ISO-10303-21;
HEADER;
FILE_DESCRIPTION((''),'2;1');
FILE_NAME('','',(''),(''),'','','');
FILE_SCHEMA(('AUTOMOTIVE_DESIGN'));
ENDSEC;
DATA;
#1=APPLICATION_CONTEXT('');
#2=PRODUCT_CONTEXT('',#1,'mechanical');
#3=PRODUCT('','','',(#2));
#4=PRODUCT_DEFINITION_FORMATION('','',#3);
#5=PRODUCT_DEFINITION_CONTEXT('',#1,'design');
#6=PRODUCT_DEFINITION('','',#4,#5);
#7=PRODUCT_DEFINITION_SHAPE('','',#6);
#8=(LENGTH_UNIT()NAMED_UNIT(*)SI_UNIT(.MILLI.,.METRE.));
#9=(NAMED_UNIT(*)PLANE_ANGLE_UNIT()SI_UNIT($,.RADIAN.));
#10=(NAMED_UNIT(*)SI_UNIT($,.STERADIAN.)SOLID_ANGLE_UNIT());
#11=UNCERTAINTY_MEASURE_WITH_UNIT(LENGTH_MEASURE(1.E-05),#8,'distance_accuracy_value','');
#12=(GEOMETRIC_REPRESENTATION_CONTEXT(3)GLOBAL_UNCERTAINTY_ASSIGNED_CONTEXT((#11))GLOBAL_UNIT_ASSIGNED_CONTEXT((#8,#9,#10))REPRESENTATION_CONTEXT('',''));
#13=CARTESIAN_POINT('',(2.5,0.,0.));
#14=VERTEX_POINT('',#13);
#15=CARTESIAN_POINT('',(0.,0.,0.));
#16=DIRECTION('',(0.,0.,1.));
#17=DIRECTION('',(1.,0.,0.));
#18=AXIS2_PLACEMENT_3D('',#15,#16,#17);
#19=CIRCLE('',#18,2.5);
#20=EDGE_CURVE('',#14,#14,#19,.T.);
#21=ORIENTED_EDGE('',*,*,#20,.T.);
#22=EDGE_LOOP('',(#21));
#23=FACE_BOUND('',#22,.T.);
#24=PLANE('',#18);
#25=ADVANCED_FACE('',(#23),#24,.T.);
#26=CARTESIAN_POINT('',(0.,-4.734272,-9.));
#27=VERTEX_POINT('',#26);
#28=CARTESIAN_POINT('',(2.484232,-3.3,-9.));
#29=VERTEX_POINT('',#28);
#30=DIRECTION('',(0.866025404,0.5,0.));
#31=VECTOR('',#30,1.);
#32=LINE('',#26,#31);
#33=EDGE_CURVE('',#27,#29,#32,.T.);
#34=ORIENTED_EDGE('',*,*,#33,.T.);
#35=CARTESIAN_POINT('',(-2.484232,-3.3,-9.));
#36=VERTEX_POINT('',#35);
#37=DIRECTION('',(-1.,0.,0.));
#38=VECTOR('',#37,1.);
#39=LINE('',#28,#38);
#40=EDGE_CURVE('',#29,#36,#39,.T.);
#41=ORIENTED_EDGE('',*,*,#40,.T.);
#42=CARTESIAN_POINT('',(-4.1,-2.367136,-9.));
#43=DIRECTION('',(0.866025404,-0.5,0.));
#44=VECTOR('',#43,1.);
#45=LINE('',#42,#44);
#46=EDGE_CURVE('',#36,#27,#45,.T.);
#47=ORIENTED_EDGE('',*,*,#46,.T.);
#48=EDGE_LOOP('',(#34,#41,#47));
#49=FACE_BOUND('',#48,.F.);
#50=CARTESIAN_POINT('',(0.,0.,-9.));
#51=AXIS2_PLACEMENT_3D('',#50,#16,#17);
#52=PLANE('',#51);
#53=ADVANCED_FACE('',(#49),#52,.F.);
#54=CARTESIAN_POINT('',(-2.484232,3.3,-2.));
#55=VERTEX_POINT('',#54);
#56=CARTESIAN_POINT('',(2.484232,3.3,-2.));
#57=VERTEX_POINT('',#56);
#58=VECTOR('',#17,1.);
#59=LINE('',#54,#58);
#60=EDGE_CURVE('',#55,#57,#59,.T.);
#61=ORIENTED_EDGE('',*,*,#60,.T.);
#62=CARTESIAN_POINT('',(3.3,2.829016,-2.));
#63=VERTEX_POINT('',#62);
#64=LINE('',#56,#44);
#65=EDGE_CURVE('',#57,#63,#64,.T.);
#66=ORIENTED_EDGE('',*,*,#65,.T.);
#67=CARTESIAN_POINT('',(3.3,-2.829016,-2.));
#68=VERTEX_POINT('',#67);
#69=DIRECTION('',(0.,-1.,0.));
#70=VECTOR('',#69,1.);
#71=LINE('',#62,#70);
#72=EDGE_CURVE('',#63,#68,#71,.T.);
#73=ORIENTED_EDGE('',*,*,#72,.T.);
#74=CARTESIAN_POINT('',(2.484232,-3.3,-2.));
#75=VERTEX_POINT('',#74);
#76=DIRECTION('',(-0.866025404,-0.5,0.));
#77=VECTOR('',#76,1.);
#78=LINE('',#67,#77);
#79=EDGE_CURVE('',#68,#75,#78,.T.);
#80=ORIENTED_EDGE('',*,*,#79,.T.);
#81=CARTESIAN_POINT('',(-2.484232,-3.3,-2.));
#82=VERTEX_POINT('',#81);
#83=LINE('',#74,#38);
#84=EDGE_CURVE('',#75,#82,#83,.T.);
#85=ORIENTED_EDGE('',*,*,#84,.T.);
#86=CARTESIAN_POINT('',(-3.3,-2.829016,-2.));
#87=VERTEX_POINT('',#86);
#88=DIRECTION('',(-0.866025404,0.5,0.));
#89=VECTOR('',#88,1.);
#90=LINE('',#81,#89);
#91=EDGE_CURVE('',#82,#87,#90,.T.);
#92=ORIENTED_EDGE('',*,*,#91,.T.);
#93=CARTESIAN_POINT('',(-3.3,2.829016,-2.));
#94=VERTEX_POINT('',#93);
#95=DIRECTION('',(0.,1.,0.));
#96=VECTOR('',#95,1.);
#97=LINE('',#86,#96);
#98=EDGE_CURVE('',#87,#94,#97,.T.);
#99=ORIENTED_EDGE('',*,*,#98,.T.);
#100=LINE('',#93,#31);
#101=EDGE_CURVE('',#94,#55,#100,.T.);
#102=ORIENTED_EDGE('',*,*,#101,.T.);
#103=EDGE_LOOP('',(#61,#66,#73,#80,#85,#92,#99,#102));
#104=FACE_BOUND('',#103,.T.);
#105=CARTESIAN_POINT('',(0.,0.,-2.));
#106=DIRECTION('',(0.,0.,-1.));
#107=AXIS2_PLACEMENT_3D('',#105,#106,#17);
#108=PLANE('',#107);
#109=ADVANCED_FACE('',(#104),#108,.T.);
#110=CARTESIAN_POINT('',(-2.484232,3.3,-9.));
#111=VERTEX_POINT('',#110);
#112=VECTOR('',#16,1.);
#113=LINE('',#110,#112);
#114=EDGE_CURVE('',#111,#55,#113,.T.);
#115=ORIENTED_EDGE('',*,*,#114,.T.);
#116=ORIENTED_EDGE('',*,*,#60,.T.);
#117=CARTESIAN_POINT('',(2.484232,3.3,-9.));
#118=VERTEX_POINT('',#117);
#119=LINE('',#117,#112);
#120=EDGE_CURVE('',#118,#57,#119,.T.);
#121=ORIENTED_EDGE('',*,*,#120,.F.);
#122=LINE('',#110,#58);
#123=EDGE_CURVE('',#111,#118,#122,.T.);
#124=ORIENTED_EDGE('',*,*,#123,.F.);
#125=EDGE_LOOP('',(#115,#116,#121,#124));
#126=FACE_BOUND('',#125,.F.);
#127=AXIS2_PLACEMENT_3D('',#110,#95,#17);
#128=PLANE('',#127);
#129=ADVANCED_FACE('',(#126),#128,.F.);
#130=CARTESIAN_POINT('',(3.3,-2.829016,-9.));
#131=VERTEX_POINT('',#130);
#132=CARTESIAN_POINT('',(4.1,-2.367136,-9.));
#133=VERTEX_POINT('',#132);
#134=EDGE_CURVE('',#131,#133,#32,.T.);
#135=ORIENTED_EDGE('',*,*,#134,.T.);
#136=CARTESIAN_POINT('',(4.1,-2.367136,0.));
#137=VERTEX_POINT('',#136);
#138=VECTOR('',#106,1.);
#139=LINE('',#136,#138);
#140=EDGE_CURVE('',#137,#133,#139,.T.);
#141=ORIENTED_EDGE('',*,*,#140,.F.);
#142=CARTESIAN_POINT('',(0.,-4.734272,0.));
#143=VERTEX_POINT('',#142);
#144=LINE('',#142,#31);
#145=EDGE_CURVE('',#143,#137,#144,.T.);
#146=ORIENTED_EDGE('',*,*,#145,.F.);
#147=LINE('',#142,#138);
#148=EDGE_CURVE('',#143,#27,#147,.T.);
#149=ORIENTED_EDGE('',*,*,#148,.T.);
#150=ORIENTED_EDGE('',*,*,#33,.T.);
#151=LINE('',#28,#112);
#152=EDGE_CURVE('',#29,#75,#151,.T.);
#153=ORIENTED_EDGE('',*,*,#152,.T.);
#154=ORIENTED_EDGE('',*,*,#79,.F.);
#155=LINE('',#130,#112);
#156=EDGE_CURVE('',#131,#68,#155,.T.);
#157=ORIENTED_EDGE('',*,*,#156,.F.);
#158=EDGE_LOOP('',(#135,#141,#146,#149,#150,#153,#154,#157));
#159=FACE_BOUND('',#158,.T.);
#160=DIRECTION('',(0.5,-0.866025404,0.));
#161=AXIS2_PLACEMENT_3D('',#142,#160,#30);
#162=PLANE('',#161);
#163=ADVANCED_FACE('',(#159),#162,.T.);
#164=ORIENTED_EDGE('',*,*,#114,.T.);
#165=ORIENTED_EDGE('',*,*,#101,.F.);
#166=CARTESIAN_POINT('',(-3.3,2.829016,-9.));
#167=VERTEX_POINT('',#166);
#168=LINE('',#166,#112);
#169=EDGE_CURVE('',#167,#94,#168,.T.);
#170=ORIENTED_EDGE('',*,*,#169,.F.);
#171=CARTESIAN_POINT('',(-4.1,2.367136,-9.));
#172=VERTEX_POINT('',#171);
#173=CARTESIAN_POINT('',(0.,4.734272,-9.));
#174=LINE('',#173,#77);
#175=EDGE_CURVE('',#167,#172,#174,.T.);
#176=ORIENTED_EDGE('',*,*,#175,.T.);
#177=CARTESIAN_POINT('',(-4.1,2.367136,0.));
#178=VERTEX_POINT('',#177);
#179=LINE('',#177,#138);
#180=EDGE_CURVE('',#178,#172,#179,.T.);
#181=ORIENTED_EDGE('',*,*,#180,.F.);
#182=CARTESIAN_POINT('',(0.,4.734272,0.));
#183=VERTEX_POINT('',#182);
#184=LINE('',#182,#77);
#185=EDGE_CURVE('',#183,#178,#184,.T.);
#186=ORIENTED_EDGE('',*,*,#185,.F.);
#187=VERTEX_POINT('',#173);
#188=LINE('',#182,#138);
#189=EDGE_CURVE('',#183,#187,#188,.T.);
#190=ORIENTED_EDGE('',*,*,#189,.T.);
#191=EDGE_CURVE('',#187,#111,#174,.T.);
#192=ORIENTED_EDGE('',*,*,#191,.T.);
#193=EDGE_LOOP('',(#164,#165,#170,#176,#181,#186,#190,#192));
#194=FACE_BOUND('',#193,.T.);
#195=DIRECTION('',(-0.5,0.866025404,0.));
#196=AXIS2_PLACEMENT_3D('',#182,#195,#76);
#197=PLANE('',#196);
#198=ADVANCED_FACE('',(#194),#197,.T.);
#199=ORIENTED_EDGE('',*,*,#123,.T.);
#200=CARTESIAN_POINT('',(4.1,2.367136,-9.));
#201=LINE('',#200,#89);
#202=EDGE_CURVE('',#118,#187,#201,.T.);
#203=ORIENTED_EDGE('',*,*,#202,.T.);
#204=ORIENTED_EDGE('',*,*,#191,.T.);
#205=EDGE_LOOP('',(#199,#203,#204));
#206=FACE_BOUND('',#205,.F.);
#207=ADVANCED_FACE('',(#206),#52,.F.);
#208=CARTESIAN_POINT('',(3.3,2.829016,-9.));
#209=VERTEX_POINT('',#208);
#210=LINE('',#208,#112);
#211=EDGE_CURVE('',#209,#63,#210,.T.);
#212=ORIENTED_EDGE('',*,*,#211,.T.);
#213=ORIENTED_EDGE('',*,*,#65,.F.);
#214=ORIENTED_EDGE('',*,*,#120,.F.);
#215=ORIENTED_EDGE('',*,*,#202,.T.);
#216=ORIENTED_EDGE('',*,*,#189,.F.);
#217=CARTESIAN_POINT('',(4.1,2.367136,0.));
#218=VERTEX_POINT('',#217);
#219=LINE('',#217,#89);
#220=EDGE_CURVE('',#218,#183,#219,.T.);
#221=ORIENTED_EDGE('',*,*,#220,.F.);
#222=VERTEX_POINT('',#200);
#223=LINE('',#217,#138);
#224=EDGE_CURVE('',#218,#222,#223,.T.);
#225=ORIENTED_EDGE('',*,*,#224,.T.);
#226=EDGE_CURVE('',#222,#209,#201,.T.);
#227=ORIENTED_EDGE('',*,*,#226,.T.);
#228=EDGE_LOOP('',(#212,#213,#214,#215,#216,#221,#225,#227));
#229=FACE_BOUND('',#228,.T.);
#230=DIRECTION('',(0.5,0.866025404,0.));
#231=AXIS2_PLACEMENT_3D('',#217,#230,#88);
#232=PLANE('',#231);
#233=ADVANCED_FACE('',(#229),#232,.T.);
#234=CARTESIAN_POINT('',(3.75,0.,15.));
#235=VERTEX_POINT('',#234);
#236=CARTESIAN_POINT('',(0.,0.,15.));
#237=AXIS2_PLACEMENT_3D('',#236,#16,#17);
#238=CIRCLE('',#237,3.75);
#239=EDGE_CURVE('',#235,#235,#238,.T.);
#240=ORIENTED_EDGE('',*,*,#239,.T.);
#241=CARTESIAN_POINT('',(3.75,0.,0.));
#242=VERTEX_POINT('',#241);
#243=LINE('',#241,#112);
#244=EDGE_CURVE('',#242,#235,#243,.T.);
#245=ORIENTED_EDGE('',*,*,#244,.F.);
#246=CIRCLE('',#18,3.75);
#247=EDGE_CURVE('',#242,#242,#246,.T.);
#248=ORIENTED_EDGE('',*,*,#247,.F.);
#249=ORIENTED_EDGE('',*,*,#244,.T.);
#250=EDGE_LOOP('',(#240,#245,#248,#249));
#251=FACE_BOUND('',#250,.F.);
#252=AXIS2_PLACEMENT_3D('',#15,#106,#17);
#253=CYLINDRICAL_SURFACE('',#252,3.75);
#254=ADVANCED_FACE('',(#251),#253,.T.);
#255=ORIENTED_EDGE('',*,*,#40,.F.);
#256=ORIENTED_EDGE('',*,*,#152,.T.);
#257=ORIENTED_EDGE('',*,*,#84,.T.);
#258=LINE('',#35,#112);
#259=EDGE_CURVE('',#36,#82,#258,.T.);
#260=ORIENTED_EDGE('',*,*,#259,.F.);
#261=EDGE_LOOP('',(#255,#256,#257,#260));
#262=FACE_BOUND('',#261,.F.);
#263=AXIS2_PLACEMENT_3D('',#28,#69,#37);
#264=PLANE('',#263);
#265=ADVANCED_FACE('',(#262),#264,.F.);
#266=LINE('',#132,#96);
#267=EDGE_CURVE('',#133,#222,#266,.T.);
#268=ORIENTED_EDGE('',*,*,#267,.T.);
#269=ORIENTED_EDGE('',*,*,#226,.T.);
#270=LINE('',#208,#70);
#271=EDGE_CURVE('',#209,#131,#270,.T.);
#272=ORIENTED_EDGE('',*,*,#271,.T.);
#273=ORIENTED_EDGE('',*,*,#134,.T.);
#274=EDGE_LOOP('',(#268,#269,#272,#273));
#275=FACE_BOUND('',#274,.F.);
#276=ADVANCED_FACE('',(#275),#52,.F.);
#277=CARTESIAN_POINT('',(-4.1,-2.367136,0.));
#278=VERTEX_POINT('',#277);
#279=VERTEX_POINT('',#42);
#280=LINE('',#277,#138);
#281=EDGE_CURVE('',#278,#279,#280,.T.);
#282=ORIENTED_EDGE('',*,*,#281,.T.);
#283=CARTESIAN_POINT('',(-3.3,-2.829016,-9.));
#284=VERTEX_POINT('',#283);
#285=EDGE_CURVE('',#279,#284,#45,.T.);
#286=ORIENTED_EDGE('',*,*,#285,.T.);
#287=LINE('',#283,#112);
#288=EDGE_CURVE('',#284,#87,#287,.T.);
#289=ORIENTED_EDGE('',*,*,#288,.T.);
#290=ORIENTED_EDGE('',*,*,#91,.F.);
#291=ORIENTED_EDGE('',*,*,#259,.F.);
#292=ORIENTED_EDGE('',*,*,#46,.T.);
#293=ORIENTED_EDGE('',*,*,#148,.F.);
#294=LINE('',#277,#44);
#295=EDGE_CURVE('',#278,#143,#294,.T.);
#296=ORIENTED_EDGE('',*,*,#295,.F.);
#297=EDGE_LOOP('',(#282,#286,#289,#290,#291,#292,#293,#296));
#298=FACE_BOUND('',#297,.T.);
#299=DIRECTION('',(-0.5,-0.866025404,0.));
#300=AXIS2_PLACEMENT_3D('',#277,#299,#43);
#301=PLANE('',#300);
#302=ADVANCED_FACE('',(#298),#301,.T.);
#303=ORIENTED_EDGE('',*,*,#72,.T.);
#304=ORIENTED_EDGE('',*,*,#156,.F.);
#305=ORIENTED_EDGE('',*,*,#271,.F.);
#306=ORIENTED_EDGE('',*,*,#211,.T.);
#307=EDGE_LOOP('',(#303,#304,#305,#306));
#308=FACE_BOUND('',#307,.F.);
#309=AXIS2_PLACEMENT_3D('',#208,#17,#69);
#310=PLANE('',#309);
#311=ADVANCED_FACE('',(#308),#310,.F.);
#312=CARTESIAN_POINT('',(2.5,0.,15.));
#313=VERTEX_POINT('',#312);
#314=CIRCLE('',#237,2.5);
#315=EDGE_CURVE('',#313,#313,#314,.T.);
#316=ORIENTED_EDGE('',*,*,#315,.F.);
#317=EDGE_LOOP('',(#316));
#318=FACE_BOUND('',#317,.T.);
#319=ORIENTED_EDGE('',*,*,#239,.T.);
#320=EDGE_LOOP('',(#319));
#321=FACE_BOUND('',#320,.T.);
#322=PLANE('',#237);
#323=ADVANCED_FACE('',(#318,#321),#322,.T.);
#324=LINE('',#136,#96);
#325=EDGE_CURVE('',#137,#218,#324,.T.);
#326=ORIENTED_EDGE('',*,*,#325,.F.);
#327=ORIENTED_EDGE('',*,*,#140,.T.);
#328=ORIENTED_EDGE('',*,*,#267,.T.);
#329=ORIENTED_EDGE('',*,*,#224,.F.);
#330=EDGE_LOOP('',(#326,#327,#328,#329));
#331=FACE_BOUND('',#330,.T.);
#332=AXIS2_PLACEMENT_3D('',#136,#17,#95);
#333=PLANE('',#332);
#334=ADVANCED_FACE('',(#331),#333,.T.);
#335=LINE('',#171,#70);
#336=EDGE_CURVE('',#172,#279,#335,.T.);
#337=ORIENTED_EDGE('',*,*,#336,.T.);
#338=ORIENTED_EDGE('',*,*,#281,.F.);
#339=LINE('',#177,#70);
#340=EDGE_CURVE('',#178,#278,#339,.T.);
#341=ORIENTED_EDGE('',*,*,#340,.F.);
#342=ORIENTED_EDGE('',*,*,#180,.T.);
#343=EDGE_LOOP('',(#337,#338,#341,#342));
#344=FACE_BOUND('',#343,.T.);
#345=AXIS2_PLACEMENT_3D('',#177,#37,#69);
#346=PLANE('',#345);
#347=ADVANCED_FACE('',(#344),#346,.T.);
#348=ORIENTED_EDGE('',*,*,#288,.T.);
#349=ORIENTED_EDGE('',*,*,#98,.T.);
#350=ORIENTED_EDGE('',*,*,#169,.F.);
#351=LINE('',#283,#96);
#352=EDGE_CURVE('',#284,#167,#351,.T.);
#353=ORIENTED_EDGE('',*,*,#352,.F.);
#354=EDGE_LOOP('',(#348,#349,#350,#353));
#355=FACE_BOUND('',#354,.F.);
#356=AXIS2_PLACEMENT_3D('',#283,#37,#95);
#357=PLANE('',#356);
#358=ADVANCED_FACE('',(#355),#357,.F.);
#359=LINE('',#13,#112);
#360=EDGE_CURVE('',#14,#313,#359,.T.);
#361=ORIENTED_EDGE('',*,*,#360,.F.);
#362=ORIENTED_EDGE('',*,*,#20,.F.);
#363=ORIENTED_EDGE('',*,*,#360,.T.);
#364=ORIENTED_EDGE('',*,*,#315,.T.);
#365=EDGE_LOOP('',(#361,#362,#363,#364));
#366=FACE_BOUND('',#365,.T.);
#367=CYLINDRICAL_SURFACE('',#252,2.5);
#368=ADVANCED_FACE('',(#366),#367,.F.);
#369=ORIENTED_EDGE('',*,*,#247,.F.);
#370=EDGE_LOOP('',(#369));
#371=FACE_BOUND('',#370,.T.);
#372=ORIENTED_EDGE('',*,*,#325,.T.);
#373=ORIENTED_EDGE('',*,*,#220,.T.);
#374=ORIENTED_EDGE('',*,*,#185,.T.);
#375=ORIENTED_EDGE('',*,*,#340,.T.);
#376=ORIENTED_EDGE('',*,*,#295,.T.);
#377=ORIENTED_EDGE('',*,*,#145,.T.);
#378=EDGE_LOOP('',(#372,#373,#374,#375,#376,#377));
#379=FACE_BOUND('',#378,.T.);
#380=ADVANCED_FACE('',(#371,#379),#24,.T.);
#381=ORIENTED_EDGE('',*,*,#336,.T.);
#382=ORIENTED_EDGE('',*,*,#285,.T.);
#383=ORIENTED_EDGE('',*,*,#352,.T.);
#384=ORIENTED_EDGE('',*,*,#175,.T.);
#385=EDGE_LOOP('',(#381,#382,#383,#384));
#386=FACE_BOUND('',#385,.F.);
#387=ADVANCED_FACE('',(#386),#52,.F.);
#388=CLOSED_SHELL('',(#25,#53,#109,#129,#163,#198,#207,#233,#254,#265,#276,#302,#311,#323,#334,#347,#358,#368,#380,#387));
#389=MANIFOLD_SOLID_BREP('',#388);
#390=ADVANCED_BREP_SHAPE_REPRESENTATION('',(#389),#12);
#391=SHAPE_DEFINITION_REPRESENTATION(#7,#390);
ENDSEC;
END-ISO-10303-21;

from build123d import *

# Parameters (mm, degrees)
F0_R     = 3.75
F0_R_2   = 2.5
F1_DEPTH = 15
F2_DEPTH = 9
F4_DEPTH = 7


# Not quite as in the source:
# - a feature names something its author has since deleted; it is built from what else it names


with BuildPart() as f1:
    # F0 (on Top) → F1 (new body)
    with BuildSketch(Plane.XY):
        Circle(F0_R)
        Circle(F0_R_2, mode=Mode.SUBTRACT)
    extrude(amount=F1_DEPTH)

    # F0 (on Top) → F2 (join)
    with BuildSketch(Plane.XY):
        Polygon((4.1, -2.3671361037), (4.1, 2.3671361037), (0, 4.7342722074), (-4.1, 2.3671361037), (-4.1, -2.3671361037), (0, -4.7342722074), align=None)
        Circle(F0_R, mode=Mode.SUBTRACT)
        Circle(F0_R)
        Circle(F0_R_2, mode=Mode.SUBTRACT)
        Circle(F0_R_2)
    extrude(amount=-F2_DEPTH)

    # F3 (on face) → F4 (cut)
    with BuildSketch(Plane(origin=(0, 0, -9), x_dir=(1, 0, 0), z_dir=(0, 0, -1))):
        Polygon((-3.3, 2.829016319), (-3.3, 0), (-3.3, -2.829016319), (-2.484232335, -3.3), (0, -3.3), (2.484232335, -3.3), (3.3, -2.829016319), (3.3, 0), (3.3, 2.829016319), (2.484232335, 3.3), (0, 3.3), (-2.484232335, 3.3), align=None)
    extrude(amount=-F4_DEPTH, mode=Mode.SUBTRACT)


solid = f1.part
